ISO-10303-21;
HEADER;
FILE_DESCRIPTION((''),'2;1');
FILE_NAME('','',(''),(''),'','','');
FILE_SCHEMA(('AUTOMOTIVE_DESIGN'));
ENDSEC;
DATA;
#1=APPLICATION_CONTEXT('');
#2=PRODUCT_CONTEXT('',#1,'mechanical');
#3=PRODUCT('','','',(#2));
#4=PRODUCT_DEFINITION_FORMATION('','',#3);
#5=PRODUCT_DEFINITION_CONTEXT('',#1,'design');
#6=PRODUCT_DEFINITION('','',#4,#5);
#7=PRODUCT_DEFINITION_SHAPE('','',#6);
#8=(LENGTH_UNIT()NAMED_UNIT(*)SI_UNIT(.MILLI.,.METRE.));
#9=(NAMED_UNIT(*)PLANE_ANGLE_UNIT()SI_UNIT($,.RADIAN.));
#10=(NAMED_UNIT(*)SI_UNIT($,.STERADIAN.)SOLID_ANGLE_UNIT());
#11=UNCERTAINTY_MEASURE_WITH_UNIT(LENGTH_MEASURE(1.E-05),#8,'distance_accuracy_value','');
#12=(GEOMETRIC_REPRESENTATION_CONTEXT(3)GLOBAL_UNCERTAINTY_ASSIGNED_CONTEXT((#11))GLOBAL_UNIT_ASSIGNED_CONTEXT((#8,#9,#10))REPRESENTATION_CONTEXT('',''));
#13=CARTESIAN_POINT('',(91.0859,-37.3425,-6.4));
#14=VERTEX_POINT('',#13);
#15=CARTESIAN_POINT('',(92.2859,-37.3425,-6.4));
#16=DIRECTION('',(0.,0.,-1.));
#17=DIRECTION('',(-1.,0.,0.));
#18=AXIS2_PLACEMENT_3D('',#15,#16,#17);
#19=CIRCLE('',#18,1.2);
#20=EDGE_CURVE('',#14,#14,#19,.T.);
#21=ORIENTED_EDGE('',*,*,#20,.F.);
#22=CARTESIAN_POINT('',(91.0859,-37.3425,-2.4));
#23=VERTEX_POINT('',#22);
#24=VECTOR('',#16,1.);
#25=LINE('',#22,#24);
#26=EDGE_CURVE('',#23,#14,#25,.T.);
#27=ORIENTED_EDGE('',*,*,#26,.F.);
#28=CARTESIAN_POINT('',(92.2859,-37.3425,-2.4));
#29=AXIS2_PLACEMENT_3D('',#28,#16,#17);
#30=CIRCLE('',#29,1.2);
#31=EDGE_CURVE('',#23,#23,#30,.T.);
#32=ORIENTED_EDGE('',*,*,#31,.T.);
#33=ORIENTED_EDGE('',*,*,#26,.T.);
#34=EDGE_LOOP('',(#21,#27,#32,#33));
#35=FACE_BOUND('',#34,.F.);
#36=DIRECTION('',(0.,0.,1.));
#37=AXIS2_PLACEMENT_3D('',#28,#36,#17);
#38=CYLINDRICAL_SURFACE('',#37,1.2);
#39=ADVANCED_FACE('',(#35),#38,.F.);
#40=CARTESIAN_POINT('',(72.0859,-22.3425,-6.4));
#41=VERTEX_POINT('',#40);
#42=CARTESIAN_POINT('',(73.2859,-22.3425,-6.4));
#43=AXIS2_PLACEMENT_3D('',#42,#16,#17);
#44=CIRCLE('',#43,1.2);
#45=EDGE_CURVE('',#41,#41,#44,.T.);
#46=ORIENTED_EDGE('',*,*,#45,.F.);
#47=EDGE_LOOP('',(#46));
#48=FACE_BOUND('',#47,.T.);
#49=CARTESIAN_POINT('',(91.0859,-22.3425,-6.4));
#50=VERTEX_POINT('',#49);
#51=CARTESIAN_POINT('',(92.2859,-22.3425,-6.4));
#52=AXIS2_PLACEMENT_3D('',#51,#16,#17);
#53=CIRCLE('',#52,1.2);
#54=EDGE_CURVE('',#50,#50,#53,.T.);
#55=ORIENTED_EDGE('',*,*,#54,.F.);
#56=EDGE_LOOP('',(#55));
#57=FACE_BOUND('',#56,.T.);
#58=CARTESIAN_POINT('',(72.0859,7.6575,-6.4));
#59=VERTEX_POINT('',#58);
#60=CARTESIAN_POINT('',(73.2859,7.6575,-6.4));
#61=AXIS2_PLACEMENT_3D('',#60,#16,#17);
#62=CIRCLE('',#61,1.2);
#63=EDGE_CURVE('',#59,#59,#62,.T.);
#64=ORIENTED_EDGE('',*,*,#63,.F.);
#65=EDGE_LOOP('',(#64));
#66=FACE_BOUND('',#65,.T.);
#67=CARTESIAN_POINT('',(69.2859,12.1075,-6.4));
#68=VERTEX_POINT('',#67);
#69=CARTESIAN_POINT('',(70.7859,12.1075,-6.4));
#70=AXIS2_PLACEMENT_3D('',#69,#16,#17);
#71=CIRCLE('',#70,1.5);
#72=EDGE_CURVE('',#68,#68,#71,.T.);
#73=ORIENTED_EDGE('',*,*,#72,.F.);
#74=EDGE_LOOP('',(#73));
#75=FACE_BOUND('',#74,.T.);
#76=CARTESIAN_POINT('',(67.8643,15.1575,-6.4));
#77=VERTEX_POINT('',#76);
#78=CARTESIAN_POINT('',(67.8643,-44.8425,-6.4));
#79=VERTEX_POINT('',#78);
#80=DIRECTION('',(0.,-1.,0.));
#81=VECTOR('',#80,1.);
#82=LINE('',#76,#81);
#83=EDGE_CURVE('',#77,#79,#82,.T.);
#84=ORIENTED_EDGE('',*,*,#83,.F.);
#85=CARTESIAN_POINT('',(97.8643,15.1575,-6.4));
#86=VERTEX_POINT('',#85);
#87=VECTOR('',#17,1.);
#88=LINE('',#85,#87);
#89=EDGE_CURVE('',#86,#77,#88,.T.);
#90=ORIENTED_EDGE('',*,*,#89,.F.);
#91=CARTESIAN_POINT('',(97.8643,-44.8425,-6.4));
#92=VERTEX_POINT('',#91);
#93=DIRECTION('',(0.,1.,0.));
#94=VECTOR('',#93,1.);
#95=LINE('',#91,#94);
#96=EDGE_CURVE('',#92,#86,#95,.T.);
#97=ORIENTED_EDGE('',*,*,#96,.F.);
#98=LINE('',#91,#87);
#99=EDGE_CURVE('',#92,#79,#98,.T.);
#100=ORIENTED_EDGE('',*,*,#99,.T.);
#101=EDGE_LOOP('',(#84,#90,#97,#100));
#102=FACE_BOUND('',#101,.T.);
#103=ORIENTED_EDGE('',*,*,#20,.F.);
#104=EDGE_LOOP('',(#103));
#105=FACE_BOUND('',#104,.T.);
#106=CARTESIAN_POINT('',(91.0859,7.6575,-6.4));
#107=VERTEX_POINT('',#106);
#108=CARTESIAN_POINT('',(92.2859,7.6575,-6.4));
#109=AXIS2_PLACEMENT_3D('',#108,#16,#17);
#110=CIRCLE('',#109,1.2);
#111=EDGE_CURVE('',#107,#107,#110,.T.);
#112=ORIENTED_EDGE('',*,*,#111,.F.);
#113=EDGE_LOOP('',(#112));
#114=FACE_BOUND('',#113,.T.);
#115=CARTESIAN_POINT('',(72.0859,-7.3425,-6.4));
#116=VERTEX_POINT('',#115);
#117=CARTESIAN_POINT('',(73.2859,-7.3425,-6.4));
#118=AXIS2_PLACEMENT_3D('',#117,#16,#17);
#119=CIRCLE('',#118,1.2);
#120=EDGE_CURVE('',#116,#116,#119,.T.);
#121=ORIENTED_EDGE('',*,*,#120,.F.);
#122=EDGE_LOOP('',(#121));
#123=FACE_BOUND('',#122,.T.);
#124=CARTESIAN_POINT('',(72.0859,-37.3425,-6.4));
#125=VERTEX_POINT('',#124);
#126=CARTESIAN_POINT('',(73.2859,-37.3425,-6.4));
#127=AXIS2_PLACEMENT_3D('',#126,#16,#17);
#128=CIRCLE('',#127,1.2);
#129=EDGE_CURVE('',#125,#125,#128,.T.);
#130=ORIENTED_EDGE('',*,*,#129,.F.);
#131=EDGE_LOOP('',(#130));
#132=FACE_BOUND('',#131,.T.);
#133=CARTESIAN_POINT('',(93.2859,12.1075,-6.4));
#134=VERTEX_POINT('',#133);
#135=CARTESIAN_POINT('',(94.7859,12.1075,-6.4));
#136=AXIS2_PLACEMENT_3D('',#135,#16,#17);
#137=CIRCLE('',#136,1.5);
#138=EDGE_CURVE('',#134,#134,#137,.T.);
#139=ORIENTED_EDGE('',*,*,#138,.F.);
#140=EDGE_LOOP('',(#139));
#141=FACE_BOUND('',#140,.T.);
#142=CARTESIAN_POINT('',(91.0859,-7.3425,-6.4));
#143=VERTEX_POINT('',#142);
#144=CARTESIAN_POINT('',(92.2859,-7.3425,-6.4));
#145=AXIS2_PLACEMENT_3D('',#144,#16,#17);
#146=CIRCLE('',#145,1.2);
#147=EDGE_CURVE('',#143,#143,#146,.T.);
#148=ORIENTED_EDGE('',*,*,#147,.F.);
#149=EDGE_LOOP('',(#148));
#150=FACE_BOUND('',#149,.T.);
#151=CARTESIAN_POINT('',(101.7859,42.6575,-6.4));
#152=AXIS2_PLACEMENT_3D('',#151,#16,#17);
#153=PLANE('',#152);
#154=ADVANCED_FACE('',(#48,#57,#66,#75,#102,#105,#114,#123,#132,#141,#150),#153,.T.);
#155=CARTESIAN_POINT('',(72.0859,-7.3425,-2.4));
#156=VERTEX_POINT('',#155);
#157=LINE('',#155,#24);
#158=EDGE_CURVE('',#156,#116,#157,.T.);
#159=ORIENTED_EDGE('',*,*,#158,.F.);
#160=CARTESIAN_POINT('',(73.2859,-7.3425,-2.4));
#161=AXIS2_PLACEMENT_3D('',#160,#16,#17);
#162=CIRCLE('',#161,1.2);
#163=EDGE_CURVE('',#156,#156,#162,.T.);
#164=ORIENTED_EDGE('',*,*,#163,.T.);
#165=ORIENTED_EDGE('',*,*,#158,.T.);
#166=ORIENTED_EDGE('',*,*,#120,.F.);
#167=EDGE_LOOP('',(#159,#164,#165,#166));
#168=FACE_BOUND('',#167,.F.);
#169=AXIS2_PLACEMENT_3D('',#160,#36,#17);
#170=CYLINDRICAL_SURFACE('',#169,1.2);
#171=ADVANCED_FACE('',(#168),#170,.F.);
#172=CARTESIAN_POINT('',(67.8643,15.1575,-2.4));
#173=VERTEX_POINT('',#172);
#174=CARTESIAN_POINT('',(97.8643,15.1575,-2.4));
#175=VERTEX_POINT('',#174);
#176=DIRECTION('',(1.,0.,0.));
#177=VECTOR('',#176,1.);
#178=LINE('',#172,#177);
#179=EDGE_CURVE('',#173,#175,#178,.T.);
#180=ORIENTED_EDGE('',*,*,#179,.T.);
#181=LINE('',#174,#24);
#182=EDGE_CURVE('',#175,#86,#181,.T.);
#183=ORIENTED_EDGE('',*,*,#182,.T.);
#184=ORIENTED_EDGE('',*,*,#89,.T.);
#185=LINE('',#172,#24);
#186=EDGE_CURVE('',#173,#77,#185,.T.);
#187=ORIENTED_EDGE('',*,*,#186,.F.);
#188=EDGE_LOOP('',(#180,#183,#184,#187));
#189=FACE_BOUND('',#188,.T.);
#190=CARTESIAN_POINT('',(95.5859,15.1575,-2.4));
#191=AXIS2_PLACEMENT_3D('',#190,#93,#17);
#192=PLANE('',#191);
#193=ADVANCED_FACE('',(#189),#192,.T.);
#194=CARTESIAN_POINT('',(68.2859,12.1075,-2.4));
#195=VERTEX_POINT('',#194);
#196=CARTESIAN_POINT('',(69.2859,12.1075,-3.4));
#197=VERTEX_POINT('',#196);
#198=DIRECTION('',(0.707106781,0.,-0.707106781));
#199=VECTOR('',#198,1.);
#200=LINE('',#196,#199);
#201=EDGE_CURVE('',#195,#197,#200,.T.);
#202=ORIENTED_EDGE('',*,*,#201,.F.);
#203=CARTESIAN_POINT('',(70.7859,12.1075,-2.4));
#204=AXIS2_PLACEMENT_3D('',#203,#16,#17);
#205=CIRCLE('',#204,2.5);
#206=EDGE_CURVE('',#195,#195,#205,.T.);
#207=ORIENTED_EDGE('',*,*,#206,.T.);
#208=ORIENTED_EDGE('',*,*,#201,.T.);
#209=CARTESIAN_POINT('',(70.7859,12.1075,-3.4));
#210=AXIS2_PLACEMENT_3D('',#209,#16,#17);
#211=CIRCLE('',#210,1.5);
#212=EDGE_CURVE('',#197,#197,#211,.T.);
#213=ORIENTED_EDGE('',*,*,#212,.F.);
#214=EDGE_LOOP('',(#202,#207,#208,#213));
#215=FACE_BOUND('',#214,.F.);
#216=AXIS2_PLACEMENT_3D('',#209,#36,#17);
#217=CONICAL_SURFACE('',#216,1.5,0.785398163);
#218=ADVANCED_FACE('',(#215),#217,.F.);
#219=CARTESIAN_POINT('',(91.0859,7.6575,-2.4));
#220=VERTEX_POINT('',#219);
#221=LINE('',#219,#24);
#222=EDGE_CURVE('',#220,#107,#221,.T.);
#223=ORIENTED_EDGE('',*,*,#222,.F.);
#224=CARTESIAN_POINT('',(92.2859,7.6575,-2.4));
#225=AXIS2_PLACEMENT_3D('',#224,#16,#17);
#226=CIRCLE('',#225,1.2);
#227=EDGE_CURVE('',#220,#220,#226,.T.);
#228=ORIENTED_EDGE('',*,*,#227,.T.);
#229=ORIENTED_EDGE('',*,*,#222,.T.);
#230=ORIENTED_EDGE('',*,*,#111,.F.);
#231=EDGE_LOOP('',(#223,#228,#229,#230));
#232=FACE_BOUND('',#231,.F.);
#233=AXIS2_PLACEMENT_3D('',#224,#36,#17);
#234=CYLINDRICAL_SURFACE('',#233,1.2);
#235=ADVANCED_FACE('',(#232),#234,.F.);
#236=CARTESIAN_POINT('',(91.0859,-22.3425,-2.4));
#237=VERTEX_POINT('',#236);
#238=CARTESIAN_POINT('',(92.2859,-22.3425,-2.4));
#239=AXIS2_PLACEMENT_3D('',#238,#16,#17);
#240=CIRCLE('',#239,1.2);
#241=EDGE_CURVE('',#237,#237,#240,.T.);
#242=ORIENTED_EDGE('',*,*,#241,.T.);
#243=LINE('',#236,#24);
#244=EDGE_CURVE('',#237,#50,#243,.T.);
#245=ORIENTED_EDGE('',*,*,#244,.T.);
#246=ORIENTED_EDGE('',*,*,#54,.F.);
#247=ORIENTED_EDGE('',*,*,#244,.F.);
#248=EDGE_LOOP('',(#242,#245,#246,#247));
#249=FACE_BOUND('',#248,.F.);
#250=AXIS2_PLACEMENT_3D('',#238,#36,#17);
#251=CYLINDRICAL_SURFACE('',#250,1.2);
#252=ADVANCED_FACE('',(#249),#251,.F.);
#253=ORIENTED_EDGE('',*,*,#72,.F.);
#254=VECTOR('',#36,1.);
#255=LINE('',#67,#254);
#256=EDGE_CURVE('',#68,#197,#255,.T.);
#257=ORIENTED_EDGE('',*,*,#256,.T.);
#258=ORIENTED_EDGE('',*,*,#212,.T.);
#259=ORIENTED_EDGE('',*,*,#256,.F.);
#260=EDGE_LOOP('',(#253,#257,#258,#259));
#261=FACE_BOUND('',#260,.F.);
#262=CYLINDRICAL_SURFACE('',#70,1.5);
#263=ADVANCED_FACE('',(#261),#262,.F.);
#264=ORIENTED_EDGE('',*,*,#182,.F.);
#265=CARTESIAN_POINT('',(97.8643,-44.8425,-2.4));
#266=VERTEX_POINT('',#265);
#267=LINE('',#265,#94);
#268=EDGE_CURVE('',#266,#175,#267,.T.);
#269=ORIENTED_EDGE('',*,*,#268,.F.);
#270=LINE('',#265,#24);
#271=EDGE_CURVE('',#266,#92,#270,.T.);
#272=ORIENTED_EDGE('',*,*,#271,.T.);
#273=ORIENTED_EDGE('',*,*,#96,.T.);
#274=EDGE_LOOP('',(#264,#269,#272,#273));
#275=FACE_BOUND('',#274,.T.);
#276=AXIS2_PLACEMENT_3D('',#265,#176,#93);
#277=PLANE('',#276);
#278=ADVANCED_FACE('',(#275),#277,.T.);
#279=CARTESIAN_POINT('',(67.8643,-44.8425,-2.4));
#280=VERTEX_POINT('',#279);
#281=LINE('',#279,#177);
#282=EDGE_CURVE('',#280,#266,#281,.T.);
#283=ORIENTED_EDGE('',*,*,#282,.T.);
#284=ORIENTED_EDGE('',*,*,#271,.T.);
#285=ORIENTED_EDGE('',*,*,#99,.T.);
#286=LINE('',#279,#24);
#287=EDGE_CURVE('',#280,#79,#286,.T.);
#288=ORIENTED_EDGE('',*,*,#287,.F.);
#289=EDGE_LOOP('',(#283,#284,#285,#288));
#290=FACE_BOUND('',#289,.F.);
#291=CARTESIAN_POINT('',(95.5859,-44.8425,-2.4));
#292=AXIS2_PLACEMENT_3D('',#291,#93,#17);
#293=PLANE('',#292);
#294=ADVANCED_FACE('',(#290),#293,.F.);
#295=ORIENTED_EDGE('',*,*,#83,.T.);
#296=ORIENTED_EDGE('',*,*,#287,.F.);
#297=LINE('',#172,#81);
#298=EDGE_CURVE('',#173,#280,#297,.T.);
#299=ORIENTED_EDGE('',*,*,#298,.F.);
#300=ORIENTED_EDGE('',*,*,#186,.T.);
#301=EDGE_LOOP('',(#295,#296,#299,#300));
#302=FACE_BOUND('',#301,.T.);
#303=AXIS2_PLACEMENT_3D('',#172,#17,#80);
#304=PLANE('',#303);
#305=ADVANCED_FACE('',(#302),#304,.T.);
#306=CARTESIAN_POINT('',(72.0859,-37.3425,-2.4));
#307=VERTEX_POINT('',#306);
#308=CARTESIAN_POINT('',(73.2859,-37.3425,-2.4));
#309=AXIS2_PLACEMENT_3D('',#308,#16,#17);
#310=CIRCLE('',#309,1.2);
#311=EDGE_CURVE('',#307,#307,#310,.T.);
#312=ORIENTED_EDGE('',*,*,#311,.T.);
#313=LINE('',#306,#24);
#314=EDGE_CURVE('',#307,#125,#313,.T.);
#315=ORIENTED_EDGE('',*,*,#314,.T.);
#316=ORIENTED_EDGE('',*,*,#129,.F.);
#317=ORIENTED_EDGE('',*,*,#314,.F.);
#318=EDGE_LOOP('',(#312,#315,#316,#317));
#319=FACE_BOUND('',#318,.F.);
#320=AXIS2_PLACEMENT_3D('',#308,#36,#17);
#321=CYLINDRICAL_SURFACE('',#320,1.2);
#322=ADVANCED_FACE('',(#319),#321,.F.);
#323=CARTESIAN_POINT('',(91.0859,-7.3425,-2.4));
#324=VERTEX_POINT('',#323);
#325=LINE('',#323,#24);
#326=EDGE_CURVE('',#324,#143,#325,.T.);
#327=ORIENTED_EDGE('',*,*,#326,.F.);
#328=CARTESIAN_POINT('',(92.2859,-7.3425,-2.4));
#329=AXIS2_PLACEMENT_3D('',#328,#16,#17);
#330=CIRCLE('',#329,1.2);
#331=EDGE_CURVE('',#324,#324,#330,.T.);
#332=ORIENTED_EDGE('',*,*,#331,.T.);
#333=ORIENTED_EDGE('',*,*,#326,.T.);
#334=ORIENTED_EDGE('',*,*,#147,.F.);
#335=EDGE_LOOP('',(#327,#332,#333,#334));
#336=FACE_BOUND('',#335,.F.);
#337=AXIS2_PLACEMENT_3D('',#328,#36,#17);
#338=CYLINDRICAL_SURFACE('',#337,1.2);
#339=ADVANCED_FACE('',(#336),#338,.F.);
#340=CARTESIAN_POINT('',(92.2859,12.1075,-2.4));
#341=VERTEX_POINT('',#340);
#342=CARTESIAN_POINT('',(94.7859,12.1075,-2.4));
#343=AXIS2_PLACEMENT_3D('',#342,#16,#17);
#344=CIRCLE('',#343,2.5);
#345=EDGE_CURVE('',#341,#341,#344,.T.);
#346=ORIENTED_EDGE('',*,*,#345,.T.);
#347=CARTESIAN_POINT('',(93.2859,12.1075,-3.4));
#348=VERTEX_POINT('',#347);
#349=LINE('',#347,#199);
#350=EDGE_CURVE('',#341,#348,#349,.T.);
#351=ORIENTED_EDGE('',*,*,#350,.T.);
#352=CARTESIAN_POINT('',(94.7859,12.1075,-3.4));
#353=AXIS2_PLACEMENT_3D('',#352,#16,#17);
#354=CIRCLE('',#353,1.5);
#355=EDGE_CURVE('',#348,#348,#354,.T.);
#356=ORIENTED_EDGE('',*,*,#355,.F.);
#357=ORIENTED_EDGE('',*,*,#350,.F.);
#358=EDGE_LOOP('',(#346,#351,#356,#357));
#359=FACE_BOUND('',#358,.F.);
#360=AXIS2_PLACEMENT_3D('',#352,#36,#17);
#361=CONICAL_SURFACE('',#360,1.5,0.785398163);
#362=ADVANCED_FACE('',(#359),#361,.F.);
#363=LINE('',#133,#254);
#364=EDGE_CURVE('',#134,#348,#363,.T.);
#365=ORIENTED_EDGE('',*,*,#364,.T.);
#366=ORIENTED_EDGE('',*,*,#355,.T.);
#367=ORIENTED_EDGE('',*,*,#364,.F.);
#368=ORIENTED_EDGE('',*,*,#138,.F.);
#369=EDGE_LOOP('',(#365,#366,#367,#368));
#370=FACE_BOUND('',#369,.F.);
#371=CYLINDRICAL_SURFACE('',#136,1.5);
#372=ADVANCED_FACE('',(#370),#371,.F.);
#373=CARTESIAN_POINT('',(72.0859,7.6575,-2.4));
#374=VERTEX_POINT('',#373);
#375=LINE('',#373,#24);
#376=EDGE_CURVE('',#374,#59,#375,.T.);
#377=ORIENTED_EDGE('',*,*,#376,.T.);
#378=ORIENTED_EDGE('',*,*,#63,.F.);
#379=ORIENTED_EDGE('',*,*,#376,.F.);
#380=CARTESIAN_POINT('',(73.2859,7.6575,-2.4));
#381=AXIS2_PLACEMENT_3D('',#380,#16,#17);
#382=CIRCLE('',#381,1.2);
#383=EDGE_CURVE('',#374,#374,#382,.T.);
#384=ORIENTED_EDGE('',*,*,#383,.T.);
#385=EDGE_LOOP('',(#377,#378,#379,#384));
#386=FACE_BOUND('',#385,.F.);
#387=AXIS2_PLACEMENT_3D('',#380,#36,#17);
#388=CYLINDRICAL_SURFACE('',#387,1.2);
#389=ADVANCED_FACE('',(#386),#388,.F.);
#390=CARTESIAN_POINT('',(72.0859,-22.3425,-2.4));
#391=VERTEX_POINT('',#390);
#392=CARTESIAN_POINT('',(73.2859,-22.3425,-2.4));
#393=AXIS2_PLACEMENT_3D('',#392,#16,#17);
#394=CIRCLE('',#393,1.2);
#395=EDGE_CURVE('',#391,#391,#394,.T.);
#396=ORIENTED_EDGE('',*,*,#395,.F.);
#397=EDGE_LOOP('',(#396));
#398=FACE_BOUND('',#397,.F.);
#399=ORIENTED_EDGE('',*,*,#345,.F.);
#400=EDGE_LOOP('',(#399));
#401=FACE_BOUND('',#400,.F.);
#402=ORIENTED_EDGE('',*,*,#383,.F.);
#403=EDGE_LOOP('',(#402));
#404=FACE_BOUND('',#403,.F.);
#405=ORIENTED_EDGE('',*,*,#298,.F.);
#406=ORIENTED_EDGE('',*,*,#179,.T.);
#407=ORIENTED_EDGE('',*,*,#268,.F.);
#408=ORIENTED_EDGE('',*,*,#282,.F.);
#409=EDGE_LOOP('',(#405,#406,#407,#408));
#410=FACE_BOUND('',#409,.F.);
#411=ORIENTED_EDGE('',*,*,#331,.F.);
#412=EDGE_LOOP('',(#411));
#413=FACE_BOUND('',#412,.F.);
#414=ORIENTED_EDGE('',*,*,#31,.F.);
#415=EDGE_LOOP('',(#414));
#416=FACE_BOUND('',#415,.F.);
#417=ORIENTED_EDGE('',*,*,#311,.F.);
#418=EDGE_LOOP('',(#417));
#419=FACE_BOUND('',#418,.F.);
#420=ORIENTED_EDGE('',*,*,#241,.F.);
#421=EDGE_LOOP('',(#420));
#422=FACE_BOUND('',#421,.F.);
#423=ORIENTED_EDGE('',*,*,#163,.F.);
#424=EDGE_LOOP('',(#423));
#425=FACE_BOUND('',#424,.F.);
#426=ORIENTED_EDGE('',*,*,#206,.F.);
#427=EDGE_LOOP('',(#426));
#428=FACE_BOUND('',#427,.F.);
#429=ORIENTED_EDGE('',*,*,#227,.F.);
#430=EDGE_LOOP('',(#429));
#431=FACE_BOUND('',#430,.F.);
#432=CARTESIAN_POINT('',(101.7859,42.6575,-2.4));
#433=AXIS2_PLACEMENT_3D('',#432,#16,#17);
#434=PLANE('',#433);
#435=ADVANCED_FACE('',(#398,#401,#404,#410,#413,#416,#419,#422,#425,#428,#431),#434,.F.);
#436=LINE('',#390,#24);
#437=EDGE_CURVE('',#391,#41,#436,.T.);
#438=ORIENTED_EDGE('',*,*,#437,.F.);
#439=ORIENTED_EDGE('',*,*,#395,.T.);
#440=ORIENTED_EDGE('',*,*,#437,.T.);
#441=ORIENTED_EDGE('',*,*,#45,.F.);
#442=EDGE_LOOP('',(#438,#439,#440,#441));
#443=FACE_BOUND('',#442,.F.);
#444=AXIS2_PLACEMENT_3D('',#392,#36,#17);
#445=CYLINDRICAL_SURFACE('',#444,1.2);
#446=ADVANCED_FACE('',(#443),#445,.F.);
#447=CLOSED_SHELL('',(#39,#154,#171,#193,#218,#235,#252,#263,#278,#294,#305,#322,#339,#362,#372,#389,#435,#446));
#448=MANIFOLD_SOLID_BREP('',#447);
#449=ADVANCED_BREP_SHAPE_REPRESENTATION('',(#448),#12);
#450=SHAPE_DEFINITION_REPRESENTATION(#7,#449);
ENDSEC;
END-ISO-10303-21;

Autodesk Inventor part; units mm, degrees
ref_plane "YZ Plane" through (0, 0, 0) normal (1, 0, 0) x (0, 1, 0)
ref_plane "XZ Plane" through (0, 0, 0) normal (0, 1, 0) x (-1, 0, 0)
ref_plane "XY Plane" through (0, 0, 0) normal (0, 0, 1) x (1, 0, 0)
ref_plane "РабПлоскость2" through (101.7859, 42.6575, -2.4) normal (0, 0, -1) x (-1, 0, 0)
sketch "Эскиз2" plane through (101.7859, 42.6575, -2.4) normal (0, 0, -1) x (-1, 0, 0)
  line L0 (6.2, -87.5) -> (12.8, -87.5) projected
  line L1 (12.8, -7.5) -> (12.8, -87.5) projected
  line L2 (6.2, -7.5) -> (6.2, -87.5) projected
  circle A0 centre (9.5, -35) radius 2.3 projected
  circle A1 centre (9.5, -50) radius 2.3 projected
  circle A2 centre (9.5, -65) radius 2.3 projected
  circle A3 centre (9.5, -80) radius 2.3 projected
  line L3 (25.2, -87.5) -> (31.8, -87.5) projected
  line L4 (31.8, -7.5) -> (31.8, -87.5) projected
  line L5 (25.2, -7.5) -> (25.2, -87.5) projected
  circle A4 centre (28.5, -35) radius 2.3 projected
  circle A5 centre (28.5, -50) radius 2.3 projected
  circle A6 centre (28.5, -65) radius 2.3 projected
  circle A7 centre (28.5, -80) radius 2.3 projected
  line L6 (3.9216, -27.5) -> (33.9216, -27.5)
  line L7 (33.9216, -27.5) -> (33.9216, -87.5)
  line L8 (33.9216, -87.5) -> (3.9216, -87.5)
  line L9 (3.9216, -87.5) -> (3.9216, -27.5)
  line L10 (18.9216, -50) -> (18.9216, -69.7785)
  circle A8 centre (9.5, -35) radius 1.2 projected
  circle A9 centre (9.5, -50) radius 1.2 projected
  circle A10 centre (9.5, -65) radius 1.2 projected
  circle A11 centre (9.5, -80) radius 1.2 projected
  circle A12 centre (28.5, -80) radius 1.2 projected
  circle A13 centre (28.5, -65) radius 1.2 projected
  circle A14 centre (28.5, -50) radius 1.2 projected
  circle A15 centre (28.5, -35) radius 2.1 projected
  circle A16 centre (28.5, -35) radius 1.2 projected
  line L11 (25.2, -7.5) -> (31.8, -7.5) projected
  line L12 (6.2, -7.5) -> (12.8, -7.5) projected
  point P0 (101.7859, -42.6575)
  dimension "d3" = 30
  dimension "d4" = 60
  dimension "d5" = 15
extrude "Выдавливание2" add sketch "Эскиз2" along normal blind 4 contours L2 L6 L1 L0 | L8 L9 L6 L2 | L1 L6 L5 L8 | L5 L6 L4 L3 | L4 L6 L7 L8 | A0 | A1 | A2 | A3 | A4 | A5 | A6 | A7 | A15
sketch "Эскиз3" plane through (101.7859, 42.6575, -6.4) normal (0, 0, -1) x (-1, 0, 0)
  circle A0 centre (7, -34.5989) radius 2 projected
  circle A1 centre (31, -34.5989) radius 2 projected
  circle A2 centre (7, -30.55) radius 1.5
  circle A3 centre (31, -30.55) radius 1.5
  circle A4 centre (7, -30.55) radius 1.5
  point P0 (101.7859, -42.6575)
extrude "Выдавливание3" cut sketch "Эскиз3" against normal blind 10 contours A2 | A3
chamfer "Фаска1" distance 1 angle 45 2 edges at (96.2859, 12.1075, -2.4) (72.2859, 12.1075, -2.4)
properties part number "деталь которая двигает"
